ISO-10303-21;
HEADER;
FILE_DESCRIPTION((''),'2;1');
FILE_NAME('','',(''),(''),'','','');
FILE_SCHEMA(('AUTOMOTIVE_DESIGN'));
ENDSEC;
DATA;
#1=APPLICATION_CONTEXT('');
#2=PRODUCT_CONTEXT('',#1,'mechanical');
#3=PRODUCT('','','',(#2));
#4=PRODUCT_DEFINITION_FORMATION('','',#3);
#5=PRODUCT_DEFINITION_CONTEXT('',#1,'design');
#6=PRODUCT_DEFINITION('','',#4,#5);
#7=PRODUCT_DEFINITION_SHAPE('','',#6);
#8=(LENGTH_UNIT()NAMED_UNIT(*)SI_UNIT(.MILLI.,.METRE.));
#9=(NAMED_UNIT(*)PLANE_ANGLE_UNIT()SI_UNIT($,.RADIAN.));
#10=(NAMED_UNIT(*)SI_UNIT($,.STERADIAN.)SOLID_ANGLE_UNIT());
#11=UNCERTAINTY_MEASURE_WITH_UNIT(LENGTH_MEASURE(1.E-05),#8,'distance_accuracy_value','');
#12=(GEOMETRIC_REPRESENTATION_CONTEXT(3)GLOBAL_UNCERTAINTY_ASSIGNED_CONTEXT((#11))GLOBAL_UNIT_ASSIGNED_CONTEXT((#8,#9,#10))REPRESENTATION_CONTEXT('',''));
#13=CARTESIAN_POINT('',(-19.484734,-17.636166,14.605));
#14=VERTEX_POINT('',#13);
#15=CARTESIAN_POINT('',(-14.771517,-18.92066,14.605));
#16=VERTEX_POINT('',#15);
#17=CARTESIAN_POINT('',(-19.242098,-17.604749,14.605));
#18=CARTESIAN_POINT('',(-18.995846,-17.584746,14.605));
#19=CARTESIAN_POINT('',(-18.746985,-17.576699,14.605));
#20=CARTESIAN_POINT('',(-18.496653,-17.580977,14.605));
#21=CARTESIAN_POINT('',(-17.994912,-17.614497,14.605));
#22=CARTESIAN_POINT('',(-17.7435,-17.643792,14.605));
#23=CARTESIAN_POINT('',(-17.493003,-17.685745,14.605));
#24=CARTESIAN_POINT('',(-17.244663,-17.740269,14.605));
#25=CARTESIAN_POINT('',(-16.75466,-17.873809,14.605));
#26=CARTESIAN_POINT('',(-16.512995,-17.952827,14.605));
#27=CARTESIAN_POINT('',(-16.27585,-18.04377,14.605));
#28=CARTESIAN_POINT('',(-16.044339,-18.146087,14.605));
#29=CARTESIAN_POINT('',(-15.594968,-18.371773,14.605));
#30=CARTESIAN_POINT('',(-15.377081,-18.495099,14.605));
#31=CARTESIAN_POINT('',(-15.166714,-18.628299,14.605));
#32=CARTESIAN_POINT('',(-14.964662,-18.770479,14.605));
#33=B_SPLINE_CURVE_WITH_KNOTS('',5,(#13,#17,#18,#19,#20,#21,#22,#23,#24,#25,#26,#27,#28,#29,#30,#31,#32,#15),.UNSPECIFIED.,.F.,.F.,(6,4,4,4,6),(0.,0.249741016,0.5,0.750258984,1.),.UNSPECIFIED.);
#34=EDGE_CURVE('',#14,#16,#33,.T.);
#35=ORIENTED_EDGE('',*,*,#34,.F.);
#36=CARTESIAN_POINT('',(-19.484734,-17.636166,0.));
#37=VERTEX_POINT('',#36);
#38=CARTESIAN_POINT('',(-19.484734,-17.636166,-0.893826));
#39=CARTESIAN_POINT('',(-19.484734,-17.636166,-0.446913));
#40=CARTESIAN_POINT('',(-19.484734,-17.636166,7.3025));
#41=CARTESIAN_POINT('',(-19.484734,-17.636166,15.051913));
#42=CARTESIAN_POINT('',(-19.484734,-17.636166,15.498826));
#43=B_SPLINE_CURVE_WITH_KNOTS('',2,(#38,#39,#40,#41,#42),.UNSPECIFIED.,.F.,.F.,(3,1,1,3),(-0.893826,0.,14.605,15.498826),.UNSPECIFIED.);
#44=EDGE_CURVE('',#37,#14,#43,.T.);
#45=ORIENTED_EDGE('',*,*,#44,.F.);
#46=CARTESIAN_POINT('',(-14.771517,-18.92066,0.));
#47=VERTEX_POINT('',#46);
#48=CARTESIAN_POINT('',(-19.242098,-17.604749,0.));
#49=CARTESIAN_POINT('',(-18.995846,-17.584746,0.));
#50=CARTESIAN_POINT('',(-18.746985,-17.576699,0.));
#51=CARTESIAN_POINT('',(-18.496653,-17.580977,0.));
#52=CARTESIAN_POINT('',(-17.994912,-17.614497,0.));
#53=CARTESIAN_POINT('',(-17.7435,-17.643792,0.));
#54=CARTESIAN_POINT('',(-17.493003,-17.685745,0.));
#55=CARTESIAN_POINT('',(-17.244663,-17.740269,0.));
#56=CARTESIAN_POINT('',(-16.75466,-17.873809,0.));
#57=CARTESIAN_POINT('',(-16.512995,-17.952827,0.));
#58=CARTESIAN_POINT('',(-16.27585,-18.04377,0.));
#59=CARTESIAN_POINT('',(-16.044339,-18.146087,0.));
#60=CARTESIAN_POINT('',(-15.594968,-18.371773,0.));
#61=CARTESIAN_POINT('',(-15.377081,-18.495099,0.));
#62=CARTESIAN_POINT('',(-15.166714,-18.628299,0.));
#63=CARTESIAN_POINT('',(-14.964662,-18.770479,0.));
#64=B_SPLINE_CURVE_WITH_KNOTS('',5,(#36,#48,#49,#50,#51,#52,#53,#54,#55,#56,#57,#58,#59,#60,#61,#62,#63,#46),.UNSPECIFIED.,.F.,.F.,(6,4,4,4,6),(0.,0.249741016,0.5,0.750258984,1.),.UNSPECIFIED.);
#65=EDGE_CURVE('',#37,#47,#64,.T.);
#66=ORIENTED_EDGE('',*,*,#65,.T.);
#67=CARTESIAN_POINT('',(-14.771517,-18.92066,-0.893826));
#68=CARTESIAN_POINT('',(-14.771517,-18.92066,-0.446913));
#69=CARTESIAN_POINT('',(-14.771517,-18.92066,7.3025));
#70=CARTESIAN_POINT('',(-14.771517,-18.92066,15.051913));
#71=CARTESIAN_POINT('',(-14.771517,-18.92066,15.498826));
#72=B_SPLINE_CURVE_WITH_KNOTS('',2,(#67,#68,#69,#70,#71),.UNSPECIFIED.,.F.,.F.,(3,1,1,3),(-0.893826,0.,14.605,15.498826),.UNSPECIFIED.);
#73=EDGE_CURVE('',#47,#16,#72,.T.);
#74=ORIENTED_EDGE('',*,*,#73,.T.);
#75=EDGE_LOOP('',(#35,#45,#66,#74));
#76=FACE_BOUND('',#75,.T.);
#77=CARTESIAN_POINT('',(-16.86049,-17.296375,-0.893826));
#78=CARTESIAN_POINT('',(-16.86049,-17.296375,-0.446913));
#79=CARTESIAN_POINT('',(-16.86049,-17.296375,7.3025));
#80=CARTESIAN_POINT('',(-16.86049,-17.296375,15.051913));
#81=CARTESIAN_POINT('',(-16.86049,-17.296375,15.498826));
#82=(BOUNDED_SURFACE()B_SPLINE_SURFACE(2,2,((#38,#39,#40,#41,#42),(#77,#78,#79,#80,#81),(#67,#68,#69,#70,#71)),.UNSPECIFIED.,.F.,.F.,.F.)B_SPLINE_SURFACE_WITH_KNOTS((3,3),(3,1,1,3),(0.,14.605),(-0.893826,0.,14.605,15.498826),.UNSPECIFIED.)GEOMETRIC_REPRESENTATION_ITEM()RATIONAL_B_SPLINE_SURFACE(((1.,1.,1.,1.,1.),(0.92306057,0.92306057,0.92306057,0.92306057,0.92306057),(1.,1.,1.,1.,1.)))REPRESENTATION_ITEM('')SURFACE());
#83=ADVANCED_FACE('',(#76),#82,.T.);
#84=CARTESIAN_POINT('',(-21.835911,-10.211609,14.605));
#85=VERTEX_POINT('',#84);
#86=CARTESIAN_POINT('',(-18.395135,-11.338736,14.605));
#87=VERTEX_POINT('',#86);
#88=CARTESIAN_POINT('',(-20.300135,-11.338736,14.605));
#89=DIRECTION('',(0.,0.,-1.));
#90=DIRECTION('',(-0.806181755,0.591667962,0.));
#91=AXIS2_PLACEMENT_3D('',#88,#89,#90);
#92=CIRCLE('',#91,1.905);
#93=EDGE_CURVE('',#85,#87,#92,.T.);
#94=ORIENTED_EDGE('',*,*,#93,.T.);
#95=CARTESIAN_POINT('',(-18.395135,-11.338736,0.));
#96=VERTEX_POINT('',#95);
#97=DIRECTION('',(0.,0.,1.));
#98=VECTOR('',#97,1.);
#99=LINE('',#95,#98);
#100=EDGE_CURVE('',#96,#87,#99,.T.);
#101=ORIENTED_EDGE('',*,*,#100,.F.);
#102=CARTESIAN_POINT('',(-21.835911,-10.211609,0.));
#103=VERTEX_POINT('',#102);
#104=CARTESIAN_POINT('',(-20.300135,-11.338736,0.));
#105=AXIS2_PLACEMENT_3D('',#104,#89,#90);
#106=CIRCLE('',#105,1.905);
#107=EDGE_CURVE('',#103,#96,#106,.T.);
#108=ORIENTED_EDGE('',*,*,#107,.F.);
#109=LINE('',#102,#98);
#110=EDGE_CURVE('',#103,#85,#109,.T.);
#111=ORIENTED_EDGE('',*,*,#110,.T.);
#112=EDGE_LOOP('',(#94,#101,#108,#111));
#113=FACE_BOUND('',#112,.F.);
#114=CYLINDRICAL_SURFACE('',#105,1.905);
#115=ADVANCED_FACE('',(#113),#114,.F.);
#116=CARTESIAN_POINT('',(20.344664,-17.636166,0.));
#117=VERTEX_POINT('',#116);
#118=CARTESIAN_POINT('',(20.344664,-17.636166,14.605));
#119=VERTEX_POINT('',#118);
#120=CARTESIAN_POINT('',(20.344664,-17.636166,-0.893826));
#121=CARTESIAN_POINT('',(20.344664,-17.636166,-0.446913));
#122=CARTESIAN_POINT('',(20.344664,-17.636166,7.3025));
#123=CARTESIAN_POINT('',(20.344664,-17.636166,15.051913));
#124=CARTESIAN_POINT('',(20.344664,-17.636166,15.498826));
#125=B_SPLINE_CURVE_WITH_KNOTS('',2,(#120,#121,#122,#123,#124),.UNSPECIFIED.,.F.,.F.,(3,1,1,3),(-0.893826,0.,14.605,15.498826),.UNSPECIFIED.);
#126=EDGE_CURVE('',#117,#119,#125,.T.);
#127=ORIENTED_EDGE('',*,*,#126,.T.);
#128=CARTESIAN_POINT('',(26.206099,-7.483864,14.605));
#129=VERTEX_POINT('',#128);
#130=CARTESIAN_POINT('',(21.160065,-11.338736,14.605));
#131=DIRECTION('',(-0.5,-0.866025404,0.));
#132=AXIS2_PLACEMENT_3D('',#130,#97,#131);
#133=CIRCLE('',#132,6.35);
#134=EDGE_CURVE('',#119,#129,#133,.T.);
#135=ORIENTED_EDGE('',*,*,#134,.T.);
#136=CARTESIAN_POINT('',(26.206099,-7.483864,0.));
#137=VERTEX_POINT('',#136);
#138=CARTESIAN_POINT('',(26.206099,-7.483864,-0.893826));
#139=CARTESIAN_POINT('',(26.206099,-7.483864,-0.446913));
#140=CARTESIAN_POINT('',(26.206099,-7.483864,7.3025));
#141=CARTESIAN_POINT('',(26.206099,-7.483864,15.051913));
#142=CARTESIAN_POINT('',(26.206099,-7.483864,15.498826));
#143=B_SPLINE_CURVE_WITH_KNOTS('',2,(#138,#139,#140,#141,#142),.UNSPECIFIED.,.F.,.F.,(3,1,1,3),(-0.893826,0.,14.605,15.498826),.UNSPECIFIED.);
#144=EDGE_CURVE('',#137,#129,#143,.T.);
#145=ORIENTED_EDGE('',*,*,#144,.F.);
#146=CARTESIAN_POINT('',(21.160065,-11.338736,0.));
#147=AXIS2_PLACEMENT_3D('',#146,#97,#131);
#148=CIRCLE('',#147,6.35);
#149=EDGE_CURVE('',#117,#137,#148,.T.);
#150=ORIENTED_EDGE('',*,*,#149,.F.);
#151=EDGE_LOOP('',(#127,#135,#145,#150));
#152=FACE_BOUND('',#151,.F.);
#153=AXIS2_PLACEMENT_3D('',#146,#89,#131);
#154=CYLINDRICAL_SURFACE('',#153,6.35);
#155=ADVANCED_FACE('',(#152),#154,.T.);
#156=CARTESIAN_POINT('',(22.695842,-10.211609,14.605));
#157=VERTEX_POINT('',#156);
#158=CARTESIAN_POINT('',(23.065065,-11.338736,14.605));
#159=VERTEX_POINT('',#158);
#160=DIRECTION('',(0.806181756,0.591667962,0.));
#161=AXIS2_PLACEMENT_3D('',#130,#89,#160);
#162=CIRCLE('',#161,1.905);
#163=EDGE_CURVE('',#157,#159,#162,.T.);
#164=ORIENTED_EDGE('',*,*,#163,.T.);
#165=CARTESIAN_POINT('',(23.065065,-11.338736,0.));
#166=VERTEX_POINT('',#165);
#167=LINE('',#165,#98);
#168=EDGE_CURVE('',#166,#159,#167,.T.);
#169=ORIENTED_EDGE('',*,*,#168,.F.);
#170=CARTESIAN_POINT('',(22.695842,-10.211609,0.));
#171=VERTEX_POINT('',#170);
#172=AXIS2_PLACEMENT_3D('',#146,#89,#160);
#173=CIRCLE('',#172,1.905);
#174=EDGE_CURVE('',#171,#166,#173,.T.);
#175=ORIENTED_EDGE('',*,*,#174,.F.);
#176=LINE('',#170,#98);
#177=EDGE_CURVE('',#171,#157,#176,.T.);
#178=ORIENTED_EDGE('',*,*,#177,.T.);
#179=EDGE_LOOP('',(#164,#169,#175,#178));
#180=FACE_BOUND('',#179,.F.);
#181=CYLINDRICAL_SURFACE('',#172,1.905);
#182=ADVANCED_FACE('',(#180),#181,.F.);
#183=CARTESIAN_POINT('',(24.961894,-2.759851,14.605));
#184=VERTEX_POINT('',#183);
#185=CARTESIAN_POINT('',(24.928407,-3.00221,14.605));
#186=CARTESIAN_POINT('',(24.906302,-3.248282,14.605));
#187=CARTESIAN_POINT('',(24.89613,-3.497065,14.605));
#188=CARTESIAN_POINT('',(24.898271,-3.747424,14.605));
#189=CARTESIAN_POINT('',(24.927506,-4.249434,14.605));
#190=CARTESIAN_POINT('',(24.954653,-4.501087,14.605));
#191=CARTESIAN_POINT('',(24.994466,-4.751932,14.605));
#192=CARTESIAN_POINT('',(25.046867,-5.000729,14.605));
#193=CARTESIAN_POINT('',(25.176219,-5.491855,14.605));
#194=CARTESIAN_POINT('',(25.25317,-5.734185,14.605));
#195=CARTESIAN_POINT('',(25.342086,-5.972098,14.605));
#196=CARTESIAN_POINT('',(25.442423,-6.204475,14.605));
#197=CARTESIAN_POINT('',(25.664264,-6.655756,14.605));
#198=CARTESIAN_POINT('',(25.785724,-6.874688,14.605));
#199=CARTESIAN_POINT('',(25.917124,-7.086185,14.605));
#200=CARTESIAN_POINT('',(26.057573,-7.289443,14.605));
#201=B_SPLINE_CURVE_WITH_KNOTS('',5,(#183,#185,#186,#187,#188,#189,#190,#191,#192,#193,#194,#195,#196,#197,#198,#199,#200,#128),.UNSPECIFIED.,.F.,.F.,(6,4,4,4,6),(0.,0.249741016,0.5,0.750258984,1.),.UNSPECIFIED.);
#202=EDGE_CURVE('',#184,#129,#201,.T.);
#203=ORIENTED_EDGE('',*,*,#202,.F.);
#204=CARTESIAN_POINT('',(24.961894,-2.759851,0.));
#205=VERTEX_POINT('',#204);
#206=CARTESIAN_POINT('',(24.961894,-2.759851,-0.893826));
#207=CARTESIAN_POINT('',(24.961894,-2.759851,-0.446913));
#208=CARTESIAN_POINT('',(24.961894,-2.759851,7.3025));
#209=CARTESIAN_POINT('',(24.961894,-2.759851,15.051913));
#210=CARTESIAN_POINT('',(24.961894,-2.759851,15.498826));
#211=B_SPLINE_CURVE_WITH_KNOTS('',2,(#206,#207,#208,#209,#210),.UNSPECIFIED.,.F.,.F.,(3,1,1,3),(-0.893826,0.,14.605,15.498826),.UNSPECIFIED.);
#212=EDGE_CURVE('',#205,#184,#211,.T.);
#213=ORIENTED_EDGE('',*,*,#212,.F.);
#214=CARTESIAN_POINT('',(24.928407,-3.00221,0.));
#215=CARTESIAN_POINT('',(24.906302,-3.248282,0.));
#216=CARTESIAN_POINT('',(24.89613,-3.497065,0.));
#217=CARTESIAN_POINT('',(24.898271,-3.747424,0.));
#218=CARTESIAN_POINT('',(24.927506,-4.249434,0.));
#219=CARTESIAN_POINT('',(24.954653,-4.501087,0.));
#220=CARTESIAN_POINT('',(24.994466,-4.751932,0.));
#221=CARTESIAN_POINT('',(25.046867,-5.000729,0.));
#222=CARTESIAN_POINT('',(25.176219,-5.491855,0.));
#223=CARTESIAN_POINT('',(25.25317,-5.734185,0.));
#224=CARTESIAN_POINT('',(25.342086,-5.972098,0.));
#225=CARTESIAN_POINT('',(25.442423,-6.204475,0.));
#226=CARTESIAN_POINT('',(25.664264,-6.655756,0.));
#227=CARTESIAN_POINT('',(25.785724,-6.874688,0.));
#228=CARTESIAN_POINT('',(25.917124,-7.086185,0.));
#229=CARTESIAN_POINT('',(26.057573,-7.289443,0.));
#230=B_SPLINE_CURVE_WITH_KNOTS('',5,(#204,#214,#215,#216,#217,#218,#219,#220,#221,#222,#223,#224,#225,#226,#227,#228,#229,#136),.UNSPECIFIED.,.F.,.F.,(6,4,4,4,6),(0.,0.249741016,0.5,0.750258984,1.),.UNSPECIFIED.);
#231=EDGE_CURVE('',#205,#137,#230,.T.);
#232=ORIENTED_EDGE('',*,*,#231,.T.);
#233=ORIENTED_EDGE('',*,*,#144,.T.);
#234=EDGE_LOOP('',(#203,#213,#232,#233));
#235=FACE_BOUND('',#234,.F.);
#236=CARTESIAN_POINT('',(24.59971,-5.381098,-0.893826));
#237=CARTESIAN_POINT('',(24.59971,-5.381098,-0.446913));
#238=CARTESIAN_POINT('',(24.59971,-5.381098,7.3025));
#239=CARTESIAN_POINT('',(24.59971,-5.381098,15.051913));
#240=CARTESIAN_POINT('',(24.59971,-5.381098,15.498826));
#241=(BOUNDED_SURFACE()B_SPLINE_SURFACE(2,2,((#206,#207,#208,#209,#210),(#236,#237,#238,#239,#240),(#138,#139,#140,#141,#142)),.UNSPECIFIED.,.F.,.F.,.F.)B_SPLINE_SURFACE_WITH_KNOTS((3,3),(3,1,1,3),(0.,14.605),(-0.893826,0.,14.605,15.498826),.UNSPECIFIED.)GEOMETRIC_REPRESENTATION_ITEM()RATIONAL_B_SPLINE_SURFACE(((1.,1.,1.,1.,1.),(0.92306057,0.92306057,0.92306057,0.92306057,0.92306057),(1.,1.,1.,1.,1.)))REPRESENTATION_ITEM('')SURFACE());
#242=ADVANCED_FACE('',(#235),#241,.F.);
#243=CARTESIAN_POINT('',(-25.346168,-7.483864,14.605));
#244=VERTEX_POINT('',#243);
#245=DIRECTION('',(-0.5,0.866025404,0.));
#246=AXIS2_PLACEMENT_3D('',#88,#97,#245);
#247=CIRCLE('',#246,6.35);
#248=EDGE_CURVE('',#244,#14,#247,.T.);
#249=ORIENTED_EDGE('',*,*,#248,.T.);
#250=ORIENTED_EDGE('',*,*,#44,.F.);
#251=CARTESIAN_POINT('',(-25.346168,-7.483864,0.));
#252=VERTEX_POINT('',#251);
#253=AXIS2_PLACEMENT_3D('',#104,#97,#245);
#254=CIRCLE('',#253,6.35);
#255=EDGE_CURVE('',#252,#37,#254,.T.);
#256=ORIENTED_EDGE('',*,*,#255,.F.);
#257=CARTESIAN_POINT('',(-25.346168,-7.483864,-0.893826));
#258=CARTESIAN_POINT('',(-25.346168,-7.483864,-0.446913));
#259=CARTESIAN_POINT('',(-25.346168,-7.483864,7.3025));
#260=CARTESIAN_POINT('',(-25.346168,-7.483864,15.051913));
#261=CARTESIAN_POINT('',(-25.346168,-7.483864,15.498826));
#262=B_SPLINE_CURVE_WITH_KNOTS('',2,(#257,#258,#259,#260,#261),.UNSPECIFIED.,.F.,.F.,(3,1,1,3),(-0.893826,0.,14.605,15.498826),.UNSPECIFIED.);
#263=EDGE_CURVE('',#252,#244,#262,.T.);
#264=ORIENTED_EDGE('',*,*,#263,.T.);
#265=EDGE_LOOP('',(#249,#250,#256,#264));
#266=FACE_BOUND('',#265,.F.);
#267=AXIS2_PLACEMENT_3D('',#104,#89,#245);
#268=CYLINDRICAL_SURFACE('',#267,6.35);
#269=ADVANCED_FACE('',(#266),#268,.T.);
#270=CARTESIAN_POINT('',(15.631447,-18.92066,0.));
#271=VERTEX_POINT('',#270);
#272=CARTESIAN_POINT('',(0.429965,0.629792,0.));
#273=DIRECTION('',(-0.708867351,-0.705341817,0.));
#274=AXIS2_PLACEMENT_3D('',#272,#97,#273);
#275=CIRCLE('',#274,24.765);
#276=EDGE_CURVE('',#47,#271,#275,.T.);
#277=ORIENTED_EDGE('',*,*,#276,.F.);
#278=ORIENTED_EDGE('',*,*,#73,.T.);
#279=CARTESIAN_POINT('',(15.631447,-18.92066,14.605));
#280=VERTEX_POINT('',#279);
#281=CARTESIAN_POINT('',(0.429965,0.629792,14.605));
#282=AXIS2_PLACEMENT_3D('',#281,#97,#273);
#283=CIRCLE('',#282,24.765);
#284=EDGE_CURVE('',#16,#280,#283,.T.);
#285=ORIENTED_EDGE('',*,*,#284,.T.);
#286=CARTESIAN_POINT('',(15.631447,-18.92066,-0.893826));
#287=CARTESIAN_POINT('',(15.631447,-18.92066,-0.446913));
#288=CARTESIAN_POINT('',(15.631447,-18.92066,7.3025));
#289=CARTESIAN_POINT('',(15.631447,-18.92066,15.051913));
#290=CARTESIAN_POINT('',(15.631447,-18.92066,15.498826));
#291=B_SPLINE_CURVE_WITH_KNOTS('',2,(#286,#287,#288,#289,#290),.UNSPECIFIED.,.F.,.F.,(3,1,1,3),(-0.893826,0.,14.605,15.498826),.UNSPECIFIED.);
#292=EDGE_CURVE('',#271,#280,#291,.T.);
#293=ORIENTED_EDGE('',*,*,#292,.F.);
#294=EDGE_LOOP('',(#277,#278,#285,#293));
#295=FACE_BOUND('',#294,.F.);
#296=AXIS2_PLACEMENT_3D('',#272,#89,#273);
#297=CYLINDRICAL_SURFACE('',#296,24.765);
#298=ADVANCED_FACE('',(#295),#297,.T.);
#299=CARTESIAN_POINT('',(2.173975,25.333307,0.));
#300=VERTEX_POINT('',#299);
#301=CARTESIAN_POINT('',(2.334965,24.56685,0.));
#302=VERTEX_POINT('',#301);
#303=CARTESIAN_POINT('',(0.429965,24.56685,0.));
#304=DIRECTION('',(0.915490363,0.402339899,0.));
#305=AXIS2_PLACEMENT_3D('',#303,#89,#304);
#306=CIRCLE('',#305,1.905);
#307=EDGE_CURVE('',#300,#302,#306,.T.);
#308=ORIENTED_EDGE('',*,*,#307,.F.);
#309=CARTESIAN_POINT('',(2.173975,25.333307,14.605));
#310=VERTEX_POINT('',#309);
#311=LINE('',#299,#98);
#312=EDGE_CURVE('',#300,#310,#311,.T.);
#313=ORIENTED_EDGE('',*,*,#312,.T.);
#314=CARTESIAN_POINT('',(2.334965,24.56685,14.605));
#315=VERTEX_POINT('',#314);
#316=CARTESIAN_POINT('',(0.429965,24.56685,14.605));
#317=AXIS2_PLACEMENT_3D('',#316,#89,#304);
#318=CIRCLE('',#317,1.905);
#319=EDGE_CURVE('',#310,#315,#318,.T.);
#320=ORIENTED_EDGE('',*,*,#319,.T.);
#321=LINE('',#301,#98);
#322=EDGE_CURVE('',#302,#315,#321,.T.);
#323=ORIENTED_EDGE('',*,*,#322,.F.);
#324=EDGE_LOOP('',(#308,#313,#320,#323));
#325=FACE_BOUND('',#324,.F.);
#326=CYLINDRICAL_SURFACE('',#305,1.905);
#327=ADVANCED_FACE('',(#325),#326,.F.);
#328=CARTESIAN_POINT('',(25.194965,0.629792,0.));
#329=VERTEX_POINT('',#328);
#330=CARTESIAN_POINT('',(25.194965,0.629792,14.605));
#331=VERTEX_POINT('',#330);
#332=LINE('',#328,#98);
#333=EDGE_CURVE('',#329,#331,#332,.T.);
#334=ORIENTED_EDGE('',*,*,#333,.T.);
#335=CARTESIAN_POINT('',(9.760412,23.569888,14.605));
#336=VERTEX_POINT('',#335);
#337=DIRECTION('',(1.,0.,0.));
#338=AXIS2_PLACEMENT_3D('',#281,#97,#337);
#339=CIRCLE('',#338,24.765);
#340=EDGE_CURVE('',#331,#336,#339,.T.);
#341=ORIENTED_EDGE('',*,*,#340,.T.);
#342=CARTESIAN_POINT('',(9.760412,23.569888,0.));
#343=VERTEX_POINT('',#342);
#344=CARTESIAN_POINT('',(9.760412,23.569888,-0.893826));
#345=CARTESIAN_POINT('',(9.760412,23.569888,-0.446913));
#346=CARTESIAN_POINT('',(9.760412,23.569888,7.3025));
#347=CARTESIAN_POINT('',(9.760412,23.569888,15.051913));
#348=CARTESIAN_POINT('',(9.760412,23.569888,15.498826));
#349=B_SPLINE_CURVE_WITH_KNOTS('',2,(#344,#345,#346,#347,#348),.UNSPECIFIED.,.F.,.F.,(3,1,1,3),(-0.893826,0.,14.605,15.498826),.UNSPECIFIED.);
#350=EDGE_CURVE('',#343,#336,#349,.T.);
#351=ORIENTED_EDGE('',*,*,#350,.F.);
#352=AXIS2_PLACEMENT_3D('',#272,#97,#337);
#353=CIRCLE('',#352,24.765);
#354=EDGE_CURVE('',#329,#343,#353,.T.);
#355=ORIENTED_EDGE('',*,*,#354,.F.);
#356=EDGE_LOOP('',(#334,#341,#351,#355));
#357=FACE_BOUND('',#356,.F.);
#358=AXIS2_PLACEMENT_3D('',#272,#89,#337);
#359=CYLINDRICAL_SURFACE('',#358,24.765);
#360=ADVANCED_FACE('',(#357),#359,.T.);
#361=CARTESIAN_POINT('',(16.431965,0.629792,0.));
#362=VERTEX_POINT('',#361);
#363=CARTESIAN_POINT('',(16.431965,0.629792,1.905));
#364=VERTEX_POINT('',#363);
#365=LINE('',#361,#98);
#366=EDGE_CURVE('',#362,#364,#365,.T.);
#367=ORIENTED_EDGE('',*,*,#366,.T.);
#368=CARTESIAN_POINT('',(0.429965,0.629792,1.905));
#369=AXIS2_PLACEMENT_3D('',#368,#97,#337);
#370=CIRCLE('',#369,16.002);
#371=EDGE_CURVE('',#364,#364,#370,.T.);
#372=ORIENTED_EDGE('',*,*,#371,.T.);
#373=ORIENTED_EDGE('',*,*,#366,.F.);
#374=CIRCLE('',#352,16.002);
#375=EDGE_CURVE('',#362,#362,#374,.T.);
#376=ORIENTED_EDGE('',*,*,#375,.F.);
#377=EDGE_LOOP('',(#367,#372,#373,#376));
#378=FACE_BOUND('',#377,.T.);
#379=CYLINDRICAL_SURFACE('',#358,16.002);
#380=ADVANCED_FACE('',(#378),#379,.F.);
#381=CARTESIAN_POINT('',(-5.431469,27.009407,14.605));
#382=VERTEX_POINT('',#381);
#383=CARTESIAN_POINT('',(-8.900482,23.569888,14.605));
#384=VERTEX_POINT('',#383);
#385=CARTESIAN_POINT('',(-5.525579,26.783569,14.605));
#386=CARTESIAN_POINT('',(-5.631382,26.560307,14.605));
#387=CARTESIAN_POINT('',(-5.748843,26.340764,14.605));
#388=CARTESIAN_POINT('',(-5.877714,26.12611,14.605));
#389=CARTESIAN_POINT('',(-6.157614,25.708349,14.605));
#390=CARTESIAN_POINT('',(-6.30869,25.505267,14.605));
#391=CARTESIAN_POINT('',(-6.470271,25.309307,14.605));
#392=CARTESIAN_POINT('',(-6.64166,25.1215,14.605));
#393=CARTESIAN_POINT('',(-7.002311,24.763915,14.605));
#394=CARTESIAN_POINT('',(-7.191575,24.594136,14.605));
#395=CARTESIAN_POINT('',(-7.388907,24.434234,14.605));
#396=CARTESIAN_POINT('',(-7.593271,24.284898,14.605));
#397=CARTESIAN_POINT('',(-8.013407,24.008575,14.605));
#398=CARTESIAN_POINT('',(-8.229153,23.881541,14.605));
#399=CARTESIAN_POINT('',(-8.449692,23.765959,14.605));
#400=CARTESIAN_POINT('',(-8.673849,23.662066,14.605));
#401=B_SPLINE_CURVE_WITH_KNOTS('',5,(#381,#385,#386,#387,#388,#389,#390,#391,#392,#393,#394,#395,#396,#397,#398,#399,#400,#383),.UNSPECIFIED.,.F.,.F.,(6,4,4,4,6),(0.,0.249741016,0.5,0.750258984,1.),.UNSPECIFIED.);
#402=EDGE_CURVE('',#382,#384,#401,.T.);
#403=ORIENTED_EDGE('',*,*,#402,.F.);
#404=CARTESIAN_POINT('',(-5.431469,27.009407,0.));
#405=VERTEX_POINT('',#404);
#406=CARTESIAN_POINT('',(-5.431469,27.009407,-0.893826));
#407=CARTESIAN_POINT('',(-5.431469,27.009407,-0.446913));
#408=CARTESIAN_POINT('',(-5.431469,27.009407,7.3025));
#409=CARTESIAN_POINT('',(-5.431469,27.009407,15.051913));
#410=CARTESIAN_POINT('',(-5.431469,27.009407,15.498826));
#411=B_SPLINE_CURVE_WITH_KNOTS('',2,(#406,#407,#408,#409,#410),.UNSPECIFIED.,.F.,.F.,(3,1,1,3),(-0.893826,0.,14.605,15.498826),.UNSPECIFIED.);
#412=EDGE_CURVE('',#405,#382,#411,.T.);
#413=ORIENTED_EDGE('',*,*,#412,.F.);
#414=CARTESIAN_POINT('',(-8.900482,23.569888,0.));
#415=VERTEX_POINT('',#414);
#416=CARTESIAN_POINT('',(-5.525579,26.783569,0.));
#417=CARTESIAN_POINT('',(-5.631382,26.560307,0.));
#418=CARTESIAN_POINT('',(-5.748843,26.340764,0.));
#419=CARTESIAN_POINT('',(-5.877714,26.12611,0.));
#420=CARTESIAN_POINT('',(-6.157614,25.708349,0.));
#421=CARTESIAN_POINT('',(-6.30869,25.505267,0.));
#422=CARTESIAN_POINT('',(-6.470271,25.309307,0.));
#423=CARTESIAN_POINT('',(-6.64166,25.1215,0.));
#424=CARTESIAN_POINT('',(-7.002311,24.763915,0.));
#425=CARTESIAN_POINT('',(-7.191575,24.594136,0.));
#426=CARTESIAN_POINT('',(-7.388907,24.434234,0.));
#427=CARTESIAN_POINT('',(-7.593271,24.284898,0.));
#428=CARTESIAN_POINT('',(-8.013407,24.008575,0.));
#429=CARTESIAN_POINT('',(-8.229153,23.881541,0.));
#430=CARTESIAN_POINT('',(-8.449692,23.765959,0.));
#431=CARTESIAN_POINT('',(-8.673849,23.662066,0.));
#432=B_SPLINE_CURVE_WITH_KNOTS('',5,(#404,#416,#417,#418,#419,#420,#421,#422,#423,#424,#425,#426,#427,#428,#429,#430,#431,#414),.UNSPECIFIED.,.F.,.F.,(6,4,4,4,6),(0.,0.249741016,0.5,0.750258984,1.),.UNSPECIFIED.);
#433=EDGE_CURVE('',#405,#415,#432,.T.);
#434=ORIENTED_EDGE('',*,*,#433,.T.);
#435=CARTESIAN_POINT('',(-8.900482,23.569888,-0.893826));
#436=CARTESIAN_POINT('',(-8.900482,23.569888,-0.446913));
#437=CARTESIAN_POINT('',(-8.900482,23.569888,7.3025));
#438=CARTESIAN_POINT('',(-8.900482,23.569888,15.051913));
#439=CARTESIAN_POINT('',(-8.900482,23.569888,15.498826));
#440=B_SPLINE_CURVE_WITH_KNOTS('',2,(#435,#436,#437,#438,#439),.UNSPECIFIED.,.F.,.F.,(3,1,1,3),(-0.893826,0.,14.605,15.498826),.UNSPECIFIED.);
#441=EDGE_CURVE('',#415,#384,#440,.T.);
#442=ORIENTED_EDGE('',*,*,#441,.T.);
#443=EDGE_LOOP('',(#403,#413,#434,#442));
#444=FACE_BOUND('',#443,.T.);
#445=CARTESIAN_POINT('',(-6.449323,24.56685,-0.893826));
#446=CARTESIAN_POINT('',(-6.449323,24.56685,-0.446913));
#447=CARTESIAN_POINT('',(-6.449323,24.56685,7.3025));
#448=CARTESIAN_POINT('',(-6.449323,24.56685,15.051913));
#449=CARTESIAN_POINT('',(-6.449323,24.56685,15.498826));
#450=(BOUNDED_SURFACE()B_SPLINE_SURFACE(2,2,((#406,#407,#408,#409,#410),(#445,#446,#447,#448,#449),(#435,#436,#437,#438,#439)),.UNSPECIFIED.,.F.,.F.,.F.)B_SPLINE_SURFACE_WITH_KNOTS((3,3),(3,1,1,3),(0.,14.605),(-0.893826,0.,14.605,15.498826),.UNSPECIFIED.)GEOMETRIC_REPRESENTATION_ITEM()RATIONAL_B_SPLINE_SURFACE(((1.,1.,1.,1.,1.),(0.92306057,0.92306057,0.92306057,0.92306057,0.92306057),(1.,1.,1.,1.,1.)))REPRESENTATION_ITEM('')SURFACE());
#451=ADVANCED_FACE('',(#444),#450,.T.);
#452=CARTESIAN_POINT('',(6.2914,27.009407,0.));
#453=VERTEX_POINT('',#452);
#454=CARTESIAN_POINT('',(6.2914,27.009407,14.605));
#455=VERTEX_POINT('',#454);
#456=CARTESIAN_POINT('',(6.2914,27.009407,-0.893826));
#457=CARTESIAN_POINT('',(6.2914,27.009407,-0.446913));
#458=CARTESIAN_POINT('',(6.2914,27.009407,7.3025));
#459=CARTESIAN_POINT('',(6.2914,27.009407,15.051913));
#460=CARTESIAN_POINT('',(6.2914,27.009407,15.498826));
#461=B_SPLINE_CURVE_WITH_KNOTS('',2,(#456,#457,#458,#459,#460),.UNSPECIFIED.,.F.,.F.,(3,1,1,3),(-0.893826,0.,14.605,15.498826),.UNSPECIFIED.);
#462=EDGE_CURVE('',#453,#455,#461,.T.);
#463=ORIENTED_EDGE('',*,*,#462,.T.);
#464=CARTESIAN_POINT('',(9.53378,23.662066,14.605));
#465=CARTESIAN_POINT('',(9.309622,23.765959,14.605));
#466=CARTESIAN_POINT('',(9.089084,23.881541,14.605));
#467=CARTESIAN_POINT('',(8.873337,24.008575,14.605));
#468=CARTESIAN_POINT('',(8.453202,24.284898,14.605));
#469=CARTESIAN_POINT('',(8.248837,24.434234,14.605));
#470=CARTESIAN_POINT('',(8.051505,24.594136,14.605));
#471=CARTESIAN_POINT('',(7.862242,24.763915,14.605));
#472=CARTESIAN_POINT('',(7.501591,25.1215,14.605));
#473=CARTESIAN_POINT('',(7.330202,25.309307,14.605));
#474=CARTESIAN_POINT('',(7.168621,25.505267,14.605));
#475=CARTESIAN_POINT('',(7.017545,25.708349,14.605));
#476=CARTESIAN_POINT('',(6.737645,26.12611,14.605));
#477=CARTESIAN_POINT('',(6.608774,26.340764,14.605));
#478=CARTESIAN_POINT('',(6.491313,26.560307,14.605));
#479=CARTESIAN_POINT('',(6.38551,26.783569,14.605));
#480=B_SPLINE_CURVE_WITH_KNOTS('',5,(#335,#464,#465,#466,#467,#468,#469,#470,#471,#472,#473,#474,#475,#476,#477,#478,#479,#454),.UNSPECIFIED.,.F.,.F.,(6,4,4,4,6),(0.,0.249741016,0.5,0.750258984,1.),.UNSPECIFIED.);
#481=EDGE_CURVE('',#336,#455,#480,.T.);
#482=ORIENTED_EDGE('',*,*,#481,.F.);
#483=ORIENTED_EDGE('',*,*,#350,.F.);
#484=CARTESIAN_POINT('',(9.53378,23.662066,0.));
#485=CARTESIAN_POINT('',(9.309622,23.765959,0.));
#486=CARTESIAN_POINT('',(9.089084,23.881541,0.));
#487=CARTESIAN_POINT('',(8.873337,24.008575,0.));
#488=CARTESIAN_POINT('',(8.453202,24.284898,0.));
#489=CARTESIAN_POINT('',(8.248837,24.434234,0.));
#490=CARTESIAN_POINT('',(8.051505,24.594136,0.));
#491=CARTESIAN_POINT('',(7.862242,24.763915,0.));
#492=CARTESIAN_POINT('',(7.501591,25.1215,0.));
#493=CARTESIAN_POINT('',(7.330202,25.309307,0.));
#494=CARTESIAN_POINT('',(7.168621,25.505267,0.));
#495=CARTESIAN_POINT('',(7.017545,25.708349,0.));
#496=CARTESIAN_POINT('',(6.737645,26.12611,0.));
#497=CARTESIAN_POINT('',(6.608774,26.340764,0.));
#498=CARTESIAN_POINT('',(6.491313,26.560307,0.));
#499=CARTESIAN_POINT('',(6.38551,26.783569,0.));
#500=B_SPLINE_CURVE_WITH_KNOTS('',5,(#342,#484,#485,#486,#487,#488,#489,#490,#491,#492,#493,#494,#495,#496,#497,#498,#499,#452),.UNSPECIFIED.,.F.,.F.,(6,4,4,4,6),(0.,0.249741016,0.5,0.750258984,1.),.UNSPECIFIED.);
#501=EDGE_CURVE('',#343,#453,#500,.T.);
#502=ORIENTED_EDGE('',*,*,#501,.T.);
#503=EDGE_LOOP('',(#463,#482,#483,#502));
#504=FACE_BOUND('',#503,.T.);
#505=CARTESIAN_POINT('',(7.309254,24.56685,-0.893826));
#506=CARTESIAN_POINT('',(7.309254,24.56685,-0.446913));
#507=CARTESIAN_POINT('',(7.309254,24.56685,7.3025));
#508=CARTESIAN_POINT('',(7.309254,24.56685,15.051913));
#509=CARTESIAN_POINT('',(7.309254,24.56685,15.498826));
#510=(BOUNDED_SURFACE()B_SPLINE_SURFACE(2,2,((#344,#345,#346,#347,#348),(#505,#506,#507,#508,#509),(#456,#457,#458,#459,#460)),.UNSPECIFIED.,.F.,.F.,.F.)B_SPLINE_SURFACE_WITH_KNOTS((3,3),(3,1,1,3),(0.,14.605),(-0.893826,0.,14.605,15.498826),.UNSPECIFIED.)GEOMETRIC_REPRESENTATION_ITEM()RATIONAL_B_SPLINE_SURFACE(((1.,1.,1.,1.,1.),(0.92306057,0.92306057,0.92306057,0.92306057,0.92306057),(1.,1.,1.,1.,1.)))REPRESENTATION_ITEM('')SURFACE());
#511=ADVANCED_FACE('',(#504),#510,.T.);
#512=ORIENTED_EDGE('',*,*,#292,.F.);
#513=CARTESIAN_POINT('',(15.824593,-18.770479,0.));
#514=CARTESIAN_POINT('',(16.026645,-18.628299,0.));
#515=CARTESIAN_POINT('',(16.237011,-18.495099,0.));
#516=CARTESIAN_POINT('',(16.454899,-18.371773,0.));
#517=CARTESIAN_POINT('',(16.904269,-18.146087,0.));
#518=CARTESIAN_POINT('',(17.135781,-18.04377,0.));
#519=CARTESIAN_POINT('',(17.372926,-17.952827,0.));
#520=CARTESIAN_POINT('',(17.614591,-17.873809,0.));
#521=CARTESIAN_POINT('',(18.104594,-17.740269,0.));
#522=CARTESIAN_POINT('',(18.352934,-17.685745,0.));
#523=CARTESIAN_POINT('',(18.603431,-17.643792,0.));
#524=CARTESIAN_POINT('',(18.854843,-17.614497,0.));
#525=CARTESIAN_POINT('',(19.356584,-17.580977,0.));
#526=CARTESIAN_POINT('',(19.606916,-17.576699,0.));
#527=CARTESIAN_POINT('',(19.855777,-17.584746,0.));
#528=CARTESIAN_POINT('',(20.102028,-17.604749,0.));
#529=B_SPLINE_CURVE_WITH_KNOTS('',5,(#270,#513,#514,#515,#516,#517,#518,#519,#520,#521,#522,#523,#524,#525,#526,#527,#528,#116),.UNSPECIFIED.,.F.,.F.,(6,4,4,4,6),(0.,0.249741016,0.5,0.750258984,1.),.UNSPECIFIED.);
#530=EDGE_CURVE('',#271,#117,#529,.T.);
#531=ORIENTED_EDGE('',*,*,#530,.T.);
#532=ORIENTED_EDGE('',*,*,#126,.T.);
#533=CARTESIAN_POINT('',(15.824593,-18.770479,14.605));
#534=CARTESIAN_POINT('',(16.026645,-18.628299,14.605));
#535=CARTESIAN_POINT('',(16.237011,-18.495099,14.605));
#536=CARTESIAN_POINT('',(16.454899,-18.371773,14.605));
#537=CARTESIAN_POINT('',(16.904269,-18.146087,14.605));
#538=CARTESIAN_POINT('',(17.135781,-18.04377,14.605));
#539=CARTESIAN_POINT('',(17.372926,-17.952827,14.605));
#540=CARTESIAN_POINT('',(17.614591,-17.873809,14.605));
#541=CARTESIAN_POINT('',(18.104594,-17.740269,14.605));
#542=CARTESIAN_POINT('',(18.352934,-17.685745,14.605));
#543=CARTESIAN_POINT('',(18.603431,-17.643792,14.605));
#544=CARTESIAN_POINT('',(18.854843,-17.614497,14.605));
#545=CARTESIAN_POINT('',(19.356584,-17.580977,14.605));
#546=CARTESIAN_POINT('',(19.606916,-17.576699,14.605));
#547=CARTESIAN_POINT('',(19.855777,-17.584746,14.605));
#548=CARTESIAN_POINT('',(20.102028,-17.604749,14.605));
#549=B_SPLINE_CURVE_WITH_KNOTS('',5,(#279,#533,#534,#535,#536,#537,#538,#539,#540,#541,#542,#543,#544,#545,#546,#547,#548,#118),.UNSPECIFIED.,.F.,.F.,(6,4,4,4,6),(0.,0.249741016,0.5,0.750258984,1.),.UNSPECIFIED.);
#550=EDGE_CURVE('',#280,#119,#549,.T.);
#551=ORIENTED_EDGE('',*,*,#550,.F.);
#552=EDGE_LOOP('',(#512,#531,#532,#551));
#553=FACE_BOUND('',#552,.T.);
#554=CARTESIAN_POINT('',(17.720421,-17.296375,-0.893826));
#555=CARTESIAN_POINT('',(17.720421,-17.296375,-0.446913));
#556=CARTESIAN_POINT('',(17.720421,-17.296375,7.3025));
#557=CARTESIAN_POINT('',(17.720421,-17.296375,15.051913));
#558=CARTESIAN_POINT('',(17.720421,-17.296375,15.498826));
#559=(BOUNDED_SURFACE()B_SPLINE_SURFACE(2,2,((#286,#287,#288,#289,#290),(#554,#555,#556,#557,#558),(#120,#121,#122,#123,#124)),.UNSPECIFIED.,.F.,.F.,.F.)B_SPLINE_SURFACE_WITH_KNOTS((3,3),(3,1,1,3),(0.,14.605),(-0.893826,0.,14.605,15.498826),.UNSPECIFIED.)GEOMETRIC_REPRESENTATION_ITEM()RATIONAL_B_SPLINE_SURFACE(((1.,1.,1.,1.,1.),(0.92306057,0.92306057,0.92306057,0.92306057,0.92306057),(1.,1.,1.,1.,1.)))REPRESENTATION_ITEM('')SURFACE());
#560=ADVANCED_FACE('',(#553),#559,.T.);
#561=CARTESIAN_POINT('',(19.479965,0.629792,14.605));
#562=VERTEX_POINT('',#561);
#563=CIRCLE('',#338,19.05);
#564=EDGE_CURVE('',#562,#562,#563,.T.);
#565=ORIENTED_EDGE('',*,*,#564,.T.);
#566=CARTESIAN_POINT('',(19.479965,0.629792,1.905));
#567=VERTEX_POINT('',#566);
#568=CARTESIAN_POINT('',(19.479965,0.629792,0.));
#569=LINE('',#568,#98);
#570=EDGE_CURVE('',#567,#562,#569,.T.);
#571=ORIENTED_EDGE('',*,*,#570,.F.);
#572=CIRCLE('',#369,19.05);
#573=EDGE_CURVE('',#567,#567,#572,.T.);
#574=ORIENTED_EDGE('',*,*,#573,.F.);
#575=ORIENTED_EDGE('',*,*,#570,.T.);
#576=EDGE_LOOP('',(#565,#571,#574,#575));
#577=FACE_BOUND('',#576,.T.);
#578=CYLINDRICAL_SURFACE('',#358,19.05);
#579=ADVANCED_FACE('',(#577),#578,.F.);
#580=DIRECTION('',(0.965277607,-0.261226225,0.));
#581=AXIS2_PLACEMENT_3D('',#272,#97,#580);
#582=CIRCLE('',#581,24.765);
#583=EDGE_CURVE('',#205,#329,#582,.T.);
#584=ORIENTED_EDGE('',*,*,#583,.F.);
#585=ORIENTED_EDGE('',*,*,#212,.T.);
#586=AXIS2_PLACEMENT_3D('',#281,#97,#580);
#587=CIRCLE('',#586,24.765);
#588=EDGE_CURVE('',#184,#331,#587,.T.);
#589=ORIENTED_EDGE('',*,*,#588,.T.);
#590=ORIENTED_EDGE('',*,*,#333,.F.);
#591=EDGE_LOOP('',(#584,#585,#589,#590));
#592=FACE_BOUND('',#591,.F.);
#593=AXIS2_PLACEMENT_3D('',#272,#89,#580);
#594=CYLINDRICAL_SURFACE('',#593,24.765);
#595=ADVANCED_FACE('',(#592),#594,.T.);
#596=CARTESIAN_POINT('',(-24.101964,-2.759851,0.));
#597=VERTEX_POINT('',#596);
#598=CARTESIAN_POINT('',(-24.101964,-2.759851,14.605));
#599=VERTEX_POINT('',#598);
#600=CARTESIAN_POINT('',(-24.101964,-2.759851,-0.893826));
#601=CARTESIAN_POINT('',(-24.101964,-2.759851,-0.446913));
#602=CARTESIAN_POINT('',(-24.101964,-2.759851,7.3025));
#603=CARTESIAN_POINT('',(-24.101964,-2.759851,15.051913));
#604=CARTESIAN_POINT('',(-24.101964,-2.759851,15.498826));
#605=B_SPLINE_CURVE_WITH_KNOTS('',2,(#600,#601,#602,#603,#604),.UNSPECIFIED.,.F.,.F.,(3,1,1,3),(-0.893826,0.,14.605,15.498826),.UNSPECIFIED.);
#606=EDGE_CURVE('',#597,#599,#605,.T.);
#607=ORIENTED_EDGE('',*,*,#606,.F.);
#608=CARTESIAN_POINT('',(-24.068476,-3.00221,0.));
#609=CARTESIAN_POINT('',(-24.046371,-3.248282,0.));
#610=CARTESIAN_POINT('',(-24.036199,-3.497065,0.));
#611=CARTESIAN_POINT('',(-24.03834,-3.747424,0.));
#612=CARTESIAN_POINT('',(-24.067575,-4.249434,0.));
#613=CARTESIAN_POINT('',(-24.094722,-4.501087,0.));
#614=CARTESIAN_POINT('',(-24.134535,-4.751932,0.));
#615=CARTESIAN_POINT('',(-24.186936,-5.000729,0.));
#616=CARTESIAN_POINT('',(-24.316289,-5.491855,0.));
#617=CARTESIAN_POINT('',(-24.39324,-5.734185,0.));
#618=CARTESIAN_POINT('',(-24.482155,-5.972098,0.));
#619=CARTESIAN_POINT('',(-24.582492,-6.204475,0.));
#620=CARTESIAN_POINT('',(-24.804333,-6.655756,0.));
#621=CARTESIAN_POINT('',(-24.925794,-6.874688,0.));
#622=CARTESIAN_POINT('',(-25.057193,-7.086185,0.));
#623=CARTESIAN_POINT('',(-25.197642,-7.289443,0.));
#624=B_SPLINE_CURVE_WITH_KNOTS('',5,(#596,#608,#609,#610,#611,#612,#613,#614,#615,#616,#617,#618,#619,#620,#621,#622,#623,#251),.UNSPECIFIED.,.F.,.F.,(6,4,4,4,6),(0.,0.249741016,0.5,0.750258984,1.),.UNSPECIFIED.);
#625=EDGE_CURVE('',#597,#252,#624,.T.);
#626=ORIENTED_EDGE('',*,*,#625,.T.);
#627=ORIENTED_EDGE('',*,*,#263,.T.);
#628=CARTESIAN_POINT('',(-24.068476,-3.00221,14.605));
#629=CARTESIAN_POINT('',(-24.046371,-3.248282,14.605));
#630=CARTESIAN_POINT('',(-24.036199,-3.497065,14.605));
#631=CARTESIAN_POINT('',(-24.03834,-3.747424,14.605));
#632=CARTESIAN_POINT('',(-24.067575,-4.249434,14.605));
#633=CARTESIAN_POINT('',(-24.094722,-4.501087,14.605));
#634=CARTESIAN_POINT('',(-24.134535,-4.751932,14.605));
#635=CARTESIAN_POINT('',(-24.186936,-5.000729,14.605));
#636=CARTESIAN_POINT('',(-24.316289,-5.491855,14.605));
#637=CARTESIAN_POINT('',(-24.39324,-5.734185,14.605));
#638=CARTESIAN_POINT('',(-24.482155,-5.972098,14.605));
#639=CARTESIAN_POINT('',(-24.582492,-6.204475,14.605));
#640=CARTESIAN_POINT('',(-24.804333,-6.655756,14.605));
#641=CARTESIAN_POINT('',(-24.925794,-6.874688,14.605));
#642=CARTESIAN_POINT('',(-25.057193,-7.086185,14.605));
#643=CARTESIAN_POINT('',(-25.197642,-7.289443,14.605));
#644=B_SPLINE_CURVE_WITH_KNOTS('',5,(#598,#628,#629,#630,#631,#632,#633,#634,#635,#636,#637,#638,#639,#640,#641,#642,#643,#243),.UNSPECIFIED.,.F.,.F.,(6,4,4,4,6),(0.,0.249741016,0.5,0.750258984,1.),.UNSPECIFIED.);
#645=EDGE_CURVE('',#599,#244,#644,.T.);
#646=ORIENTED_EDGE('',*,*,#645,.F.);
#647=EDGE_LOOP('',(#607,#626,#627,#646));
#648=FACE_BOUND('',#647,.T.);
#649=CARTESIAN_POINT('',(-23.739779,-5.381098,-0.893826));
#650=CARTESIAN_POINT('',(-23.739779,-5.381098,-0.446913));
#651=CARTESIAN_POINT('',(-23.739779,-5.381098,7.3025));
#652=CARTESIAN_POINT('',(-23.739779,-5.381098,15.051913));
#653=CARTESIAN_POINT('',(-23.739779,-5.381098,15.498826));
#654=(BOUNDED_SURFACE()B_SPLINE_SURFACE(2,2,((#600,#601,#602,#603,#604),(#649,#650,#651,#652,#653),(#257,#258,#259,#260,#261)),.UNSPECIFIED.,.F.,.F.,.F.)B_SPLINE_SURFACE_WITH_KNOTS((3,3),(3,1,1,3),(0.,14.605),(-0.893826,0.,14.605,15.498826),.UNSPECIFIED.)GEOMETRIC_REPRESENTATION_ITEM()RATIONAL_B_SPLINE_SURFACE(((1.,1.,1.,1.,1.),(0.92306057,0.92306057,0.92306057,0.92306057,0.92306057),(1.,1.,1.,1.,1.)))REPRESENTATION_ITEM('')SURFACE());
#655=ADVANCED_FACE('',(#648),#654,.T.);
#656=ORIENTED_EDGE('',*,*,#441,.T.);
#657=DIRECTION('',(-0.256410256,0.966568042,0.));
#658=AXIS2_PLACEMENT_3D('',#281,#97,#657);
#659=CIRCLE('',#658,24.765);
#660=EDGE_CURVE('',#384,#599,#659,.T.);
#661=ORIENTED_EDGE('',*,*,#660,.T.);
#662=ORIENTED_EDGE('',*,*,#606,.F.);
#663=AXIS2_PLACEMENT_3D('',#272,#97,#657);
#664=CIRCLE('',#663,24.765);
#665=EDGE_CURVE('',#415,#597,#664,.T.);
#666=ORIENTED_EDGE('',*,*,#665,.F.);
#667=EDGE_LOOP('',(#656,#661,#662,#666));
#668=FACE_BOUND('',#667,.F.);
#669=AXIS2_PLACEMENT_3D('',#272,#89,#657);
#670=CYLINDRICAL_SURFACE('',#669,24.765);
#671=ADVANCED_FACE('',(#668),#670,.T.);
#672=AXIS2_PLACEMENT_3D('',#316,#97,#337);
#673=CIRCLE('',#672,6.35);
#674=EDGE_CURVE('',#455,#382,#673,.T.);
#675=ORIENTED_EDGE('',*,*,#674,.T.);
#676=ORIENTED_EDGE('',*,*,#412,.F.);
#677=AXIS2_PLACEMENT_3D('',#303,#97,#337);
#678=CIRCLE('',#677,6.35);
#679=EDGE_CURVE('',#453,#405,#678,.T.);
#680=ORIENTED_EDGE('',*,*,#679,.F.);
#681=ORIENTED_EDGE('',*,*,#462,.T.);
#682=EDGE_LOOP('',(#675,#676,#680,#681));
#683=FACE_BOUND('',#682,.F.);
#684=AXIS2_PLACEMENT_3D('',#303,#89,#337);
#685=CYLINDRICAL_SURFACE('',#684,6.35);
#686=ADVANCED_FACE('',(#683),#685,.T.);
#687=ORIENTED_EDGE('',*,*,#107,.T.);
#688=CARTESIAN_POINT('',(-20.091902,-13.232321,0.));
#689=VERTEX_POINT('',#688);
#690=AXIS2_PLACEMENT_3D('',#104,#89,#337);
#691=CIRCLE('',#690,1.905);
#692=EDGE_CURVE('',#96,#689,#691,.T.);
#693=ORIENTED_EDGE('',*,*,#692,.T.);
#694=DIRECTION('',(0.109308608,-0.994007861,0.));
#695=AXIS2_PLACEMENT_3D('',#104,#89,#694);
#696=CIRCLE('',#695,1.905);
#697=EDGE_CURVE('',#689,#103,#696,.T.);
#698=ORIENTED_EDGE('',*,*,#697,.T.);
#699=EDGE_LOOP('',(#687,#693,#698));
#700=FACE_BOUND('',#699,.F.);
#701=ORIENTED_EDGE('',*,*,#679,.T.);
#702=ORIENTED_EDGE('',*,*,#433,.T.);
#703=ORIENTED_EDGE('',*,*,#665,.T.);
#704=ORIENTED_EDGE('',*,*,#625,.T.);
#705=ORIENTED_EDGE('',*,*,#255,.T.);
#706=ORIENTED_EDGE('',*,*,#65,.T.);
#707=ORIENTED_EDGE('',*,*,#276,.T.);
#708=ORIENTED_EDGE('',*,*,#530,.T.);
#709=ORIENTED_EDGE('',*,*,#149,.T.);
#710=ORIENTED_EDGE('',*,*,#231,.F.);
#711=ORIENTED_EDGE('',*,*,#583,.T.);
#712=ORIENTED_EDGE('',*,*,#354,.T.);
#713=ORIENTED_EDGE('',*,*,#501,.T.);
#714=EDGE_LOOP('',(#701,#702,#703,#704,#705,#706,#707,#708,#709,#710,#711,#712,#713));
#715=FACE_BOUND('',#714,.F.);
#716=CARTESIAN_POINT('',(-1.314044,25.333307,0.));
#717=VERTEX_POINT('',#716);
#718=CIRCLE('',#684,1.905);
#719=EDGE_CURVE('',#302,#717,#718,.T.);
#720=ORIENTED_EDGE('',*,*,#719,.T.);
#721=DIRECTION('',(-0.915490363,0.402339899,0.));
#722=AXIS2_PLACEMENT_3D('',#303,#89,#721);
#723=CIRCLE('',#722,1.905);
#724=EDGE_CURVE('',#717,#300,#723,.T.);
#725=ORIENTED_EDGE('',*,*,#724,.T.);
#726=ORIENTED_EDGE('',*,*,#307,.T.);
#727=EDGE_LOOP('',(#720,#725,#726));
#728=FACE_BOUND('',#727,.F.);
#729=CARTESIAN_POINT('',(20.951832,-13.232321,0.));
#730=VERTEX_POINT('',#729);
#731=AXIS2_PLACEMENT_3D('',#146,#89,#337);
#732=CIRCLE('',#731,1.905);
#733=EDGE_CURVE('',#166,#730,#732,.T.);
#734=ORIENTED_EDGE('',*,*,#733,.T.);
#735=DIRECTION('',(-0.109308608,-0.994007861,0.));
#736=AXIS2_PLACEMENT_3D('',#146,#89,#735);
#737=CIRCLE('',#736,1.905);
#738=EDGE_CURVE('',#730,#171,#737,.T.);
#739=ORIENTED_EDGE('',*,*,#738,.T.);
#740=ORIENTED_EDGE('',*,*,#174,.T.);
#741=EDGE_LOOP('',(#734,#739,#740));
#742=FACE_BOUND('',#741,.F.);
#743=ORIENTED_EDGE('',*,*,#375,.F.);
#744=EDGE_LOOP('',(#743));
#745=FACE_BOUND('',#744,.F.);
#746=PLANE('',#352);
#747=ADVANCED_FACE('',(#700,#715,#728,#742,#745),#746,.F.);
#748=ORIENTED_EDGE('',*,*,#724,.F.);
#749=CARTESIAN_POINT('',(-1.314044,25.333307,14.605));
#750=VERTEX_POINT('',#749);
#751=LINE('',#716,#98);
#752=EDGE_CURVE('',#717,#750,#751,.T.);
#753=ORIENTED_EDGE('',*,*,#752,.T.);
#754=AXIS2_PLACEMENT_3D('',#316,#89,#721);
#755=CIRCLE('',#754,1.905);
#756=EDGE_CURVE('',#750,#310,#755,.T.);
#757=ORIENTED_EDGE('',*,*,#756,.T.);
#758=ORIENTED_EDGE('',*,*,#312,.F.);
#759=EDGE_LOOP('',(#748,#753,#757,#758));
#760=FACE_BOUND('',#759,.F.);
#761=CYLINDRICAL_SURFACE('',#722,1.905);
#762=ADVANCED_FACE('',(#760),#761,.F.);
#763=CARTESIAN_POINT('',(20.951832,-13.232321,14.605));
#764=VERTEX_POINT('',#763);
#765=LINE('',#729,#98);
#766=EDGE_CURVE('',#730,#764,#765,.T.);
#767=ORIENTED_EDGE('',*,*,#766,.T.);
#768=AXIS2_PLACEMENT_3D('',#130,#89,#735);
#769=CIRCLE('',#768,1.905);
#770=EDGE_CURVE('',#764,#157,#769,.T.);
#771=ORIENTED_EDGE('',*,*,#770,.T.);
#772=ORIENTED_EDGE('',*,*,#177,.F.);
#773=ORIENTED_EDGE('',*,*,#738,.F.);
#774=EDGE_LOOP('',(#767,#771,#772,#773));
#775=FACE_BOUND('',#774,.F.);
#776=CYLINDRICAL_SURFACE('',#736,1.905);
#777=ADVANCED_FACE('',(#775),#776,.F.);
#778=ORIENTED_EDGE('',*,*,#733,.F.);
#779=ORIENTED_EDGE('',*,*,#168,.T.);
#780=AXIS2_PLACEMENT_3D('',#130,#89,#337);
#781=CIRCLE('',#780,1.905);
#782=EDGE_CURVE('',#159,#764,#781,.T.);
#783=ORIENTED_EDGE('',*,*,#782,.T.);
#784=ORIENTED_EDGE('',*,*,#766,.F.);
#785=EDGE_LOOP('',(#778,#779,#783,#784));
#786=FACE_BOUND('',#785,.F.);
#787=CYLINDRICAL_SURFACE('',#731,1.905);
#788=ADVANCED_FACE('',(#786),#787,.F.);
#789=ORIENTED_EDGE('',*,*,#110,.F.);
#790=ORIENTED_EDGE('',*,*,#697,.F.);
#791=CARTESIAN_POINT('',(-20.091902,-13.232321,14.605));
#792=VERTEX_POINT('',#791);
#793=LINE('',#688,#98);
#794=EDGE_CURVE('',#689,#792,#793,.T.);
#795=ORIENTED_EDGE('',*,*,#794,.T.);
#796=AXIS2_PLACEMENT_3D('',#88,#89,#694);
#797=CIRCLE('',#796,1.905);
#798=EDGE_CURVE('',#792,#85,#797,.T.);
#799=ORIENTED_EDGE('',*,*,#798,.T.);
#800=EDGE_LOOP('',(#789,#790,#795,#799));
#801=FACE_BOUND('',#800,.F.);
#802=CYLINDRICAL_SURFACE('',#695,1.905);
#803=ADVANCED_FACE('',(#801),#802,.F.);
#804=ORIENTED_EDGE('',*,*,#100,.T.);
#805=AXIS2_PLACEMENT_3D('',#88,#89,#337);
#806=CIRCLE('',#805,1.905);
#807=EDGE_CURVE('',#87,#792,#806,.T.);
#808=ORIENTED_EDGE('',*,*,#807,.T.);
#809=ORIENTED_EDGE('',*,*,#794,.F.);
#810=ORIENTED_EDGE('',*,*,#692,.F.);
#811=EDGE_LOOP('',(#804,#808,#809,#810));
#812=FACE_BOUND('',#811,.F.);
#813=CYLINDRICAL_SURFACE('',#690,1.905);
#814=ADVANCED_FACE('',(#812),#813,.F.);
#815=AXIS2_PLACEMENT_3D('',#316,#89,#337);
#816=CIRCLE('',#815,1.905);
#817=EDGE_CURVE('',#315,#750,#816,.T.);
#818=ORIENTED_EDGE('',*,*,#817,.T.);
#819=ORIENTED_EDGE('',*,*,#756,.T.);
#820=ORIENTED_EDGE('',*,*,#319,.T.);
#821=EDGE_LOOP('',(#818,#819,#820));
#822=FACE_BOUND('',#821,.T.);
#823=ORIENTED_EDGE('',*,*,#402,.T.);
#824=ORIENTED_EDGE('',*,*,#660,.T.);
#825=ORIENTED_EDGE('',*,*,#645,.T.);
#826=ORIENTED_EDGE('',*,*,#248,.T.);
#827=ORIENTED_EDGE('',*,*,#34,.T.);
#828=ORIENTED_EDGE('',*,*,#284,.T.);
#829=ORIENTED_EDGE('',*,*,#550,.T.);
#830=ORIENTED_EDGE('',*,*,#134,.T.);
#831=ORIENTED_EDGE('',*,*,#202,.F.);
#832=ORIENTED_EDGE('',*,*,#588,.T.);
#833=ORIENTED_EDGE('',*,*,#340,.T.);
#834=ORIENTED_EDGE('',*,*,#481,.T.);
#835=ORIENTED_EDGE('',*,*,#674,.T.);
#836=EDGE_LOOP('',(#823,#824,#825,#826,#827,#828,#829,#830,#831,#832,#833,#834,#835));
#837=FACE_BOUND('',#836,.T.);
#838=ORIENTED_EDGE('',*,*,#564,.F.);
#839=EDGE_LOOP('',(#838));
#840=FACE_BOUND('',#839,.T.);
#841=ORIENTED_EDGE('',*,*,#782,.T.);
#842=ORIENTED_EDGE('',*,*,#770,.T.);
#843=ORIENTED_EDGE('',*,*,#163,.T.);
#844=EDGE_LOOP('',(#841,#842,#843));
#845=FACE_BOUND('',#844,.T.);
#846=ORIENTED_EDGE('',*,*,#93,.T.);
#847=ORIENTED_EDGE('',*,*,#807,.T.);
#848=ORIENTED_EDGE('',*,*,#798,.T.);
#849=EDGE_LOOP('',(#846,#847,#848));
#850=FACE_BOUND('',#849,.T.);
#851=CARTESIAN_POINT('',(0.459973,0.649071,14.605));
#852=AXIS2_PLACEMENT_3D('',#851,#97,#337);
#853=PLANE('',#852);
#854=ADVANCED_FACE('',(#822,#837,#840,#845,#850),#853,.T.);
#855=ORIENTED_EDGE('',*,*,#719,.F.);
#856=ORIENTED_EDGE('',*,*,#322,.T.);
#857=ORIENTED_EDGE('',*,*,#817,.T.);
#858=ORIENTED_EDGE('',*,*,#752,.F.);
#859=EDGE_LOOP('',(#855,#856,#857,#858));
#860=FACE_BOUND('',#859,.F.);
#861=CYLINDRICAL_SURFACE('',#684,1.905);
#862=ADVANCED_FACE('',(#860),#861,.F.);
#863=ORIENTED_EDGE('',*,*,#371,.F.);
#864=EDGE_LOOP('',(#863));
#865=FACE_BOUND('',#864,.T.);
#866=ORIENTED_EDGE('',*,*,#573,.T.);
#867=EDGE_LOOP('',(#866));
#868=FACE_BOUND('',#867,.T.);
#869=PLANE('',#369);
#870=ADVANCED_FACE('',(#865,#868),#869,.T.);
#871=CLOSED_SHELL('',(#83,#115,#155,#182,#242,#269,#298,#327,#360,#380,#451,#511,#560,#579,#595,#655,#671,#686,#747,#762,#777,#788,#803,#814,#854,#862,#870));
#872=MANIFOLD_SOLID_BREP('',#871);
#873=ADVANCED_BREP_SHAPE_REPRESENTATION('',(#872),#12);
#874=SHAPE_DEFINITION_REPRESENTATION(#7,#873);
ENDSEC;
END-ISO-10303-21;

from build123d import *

# Parameters (mm, degrees)
F0_R     = 19.05
F1_DEPTH = 14.605
F0_R_2   = 16.002
F2_DEPTH = 1.905
F3_R     = 6.35


with BuildPart() as f1:
    # F0 (on Top) → F1 (new body)
    with BuildSketch(Plane.XY):
        with BuildLine():
            ThreePointArc((24.3350653445, -5.8394751301), (24.9790491411, -2.63329093), (25.194965399, 0.6297923397))
            ThreePointArc((25.194965399, 0.6297923397), (20.0585539244, 15.730247217), (6.779965399, 24.5668499075))
            ThreePointArc((6.779965399, 24.5668499075), (4.4950742876, 25.0588757184), (2.1739745412, 25.3333074158))
            ThreePointArc((2.1739745412, 25.3333074158), (2.2942832925, 24.958441266), (2.334965399, 24.5668499075))
            ThreePointArc((2.334965399, 24.5668499075), (0.0383740404, 22.702532014), (-1.3140437432, 25.3333074158))
            ThreePointArc((-1.3140437432, 25.3333074158), (-3.6351434896, 25.0588757184), (-5.920034601, 24.5668499075))
            ThreePointArc((-5.920034601, 24.5668499075), (-21.0171537257, 13.0122923397), (-23.4751345465, -5.8394751301))
            ThreePointArc((-23.4751345465, -5.8394751301), (-22.7587958424, -8.0642617829), (-21.8359107907, -10.2116089767))
            ThreePointArc((-21.8359107907, -10.2116089767), (-19.7071036642, -9.5283941084), (-18.3951345465, -11.3387364441))
            ThreePointArc((-18.3951345465, -11.3387364441), (-18.8813835693, -12.6100234553), (-20.0919016485, -13.2323214198))
            ThreePointArc((-20.0919016485, -13.2323214198), (-18.6936869538, -15.1052369163), (-17.1251345465, -16.8379977581))
            ThreePointArc((-17.1251345465, -16.8379977581), (0.429965399, -24.1352076603), (17.9850653445, -16.8379977581))
            ThreePointArc((17.9850653445, -16.8379977581), (19.5536177518, -15.1052369163), (20.9518324465, -13.2323214198))
            ThreePointArc((20.9518324465, -13.2323214198), (19.5102869503, -10.3862364441), (22.6958415887, -10.2116089767))
            ThreePointArc((22.6958415887, -10.2116089767), (23.6187266404, -8.0642617829), (24.3350653445, -5.8394751301))
        make_face()
        with Locations((0.429965399, 0.6297923397)):
            Circle(F0_R, mode=Mode.SUBTRACT)
        with BuildLine():
            ThreePointArc((-21.8359107907, -10.2116089767), (-22.7587958424, -8.0642617829), (-23.4751345465, -5.8394751301))
            ThreePointArc((-23.4751345465, -5.8394751301), (-25.7993958605, -14.5137364441), (-17.1251345465, -16.8379977581))
            ThreePointArc((-17.1251345465, -16.8379977581), (-18.6936869538, -15.1052369163), (-20.0919016485, -13.2323214198))
            ThreePointArc((-20.0919016485, -13.2323214198), (-21.9499129407, -12.2912364441), (-21.8359107907, -10.2116089767))
        make_face()
        with BuildLine():
            ThreePointArc((17.9850653445, -16.8379977581), (26.6593266585, -14.5137364441), (24.3350653445, -5.8394751301))
            ThreePointArc((24.3350653445, -5.8394751301), (23.6187266404, -8.0642617829), (22.6958415887, -10.2116089767))
            ThreePointArc((22.6958415887, -10.2116089767), (22.9704076802, -10.7457055618), (23.0650653445, -11.3387364441))
            ThreePointArc((23.0650653445, -11.3387364441), (22.4313523556, -12.7574874213), (20.9518324465, -13.2323214198))
            ThreePointArc((20.9518324465, -13.2323214198), (19.5536177518, -15.1052369163), (17.9850653445, -16.8379977581))
        make_face()
        with BuildLine():
            ThreePointArc((2.1739745412, 25.3333074158), (4.4950742876, 25.0588757184), (6.779965399, 24.5668499075))
            ThreePointArc((6.779965399, 24.5668499075), (0.429965399, 30.9168499075), (-5.920034601, 24.5668499075))
            ThreePointArc((-5.920034601, 24.5668499075), (-3.6351434896, 25.0588757184), (-1.3140437432, 25.3333074158))
            ThreePointArc((-1.3140437432, 25.3333074158), (0.429965399, 26.4718499075), (2.1739745412, 25.3333074158))
        make_face()
    extrude(amount=F1_DEPTH)

    # F0 (on Top) → F2 (join)
    with BuildSketch(Plane.XY):
        with Locations((0.429965399, 0.6297923397)):
            Circle(F0_R)
        with Locations((0.429965399, 0.6297923397)):
            Circle(F0_R_2, mode=Mode.SUBTRACT)
    extrude(amount=F2_DEPTH)

    # F3
    f3_edges = [f1.edges().sort_by_distance(p)[0] for p in [
        (17.985065, -16.837998, 7.3025),
        (-23.475135, -5.839475, 7.3025),
        (6.779965, 24.56685, 7.3025),
        (24.335065, -5.839475, 7.3025),
        (-5.920035, 24.56685, 7.3025),
        (-17.125135, -16.837998, 7.3025),
    ]]
    fillet(f3_edges, radius=F3_R)


solid = f1.part
